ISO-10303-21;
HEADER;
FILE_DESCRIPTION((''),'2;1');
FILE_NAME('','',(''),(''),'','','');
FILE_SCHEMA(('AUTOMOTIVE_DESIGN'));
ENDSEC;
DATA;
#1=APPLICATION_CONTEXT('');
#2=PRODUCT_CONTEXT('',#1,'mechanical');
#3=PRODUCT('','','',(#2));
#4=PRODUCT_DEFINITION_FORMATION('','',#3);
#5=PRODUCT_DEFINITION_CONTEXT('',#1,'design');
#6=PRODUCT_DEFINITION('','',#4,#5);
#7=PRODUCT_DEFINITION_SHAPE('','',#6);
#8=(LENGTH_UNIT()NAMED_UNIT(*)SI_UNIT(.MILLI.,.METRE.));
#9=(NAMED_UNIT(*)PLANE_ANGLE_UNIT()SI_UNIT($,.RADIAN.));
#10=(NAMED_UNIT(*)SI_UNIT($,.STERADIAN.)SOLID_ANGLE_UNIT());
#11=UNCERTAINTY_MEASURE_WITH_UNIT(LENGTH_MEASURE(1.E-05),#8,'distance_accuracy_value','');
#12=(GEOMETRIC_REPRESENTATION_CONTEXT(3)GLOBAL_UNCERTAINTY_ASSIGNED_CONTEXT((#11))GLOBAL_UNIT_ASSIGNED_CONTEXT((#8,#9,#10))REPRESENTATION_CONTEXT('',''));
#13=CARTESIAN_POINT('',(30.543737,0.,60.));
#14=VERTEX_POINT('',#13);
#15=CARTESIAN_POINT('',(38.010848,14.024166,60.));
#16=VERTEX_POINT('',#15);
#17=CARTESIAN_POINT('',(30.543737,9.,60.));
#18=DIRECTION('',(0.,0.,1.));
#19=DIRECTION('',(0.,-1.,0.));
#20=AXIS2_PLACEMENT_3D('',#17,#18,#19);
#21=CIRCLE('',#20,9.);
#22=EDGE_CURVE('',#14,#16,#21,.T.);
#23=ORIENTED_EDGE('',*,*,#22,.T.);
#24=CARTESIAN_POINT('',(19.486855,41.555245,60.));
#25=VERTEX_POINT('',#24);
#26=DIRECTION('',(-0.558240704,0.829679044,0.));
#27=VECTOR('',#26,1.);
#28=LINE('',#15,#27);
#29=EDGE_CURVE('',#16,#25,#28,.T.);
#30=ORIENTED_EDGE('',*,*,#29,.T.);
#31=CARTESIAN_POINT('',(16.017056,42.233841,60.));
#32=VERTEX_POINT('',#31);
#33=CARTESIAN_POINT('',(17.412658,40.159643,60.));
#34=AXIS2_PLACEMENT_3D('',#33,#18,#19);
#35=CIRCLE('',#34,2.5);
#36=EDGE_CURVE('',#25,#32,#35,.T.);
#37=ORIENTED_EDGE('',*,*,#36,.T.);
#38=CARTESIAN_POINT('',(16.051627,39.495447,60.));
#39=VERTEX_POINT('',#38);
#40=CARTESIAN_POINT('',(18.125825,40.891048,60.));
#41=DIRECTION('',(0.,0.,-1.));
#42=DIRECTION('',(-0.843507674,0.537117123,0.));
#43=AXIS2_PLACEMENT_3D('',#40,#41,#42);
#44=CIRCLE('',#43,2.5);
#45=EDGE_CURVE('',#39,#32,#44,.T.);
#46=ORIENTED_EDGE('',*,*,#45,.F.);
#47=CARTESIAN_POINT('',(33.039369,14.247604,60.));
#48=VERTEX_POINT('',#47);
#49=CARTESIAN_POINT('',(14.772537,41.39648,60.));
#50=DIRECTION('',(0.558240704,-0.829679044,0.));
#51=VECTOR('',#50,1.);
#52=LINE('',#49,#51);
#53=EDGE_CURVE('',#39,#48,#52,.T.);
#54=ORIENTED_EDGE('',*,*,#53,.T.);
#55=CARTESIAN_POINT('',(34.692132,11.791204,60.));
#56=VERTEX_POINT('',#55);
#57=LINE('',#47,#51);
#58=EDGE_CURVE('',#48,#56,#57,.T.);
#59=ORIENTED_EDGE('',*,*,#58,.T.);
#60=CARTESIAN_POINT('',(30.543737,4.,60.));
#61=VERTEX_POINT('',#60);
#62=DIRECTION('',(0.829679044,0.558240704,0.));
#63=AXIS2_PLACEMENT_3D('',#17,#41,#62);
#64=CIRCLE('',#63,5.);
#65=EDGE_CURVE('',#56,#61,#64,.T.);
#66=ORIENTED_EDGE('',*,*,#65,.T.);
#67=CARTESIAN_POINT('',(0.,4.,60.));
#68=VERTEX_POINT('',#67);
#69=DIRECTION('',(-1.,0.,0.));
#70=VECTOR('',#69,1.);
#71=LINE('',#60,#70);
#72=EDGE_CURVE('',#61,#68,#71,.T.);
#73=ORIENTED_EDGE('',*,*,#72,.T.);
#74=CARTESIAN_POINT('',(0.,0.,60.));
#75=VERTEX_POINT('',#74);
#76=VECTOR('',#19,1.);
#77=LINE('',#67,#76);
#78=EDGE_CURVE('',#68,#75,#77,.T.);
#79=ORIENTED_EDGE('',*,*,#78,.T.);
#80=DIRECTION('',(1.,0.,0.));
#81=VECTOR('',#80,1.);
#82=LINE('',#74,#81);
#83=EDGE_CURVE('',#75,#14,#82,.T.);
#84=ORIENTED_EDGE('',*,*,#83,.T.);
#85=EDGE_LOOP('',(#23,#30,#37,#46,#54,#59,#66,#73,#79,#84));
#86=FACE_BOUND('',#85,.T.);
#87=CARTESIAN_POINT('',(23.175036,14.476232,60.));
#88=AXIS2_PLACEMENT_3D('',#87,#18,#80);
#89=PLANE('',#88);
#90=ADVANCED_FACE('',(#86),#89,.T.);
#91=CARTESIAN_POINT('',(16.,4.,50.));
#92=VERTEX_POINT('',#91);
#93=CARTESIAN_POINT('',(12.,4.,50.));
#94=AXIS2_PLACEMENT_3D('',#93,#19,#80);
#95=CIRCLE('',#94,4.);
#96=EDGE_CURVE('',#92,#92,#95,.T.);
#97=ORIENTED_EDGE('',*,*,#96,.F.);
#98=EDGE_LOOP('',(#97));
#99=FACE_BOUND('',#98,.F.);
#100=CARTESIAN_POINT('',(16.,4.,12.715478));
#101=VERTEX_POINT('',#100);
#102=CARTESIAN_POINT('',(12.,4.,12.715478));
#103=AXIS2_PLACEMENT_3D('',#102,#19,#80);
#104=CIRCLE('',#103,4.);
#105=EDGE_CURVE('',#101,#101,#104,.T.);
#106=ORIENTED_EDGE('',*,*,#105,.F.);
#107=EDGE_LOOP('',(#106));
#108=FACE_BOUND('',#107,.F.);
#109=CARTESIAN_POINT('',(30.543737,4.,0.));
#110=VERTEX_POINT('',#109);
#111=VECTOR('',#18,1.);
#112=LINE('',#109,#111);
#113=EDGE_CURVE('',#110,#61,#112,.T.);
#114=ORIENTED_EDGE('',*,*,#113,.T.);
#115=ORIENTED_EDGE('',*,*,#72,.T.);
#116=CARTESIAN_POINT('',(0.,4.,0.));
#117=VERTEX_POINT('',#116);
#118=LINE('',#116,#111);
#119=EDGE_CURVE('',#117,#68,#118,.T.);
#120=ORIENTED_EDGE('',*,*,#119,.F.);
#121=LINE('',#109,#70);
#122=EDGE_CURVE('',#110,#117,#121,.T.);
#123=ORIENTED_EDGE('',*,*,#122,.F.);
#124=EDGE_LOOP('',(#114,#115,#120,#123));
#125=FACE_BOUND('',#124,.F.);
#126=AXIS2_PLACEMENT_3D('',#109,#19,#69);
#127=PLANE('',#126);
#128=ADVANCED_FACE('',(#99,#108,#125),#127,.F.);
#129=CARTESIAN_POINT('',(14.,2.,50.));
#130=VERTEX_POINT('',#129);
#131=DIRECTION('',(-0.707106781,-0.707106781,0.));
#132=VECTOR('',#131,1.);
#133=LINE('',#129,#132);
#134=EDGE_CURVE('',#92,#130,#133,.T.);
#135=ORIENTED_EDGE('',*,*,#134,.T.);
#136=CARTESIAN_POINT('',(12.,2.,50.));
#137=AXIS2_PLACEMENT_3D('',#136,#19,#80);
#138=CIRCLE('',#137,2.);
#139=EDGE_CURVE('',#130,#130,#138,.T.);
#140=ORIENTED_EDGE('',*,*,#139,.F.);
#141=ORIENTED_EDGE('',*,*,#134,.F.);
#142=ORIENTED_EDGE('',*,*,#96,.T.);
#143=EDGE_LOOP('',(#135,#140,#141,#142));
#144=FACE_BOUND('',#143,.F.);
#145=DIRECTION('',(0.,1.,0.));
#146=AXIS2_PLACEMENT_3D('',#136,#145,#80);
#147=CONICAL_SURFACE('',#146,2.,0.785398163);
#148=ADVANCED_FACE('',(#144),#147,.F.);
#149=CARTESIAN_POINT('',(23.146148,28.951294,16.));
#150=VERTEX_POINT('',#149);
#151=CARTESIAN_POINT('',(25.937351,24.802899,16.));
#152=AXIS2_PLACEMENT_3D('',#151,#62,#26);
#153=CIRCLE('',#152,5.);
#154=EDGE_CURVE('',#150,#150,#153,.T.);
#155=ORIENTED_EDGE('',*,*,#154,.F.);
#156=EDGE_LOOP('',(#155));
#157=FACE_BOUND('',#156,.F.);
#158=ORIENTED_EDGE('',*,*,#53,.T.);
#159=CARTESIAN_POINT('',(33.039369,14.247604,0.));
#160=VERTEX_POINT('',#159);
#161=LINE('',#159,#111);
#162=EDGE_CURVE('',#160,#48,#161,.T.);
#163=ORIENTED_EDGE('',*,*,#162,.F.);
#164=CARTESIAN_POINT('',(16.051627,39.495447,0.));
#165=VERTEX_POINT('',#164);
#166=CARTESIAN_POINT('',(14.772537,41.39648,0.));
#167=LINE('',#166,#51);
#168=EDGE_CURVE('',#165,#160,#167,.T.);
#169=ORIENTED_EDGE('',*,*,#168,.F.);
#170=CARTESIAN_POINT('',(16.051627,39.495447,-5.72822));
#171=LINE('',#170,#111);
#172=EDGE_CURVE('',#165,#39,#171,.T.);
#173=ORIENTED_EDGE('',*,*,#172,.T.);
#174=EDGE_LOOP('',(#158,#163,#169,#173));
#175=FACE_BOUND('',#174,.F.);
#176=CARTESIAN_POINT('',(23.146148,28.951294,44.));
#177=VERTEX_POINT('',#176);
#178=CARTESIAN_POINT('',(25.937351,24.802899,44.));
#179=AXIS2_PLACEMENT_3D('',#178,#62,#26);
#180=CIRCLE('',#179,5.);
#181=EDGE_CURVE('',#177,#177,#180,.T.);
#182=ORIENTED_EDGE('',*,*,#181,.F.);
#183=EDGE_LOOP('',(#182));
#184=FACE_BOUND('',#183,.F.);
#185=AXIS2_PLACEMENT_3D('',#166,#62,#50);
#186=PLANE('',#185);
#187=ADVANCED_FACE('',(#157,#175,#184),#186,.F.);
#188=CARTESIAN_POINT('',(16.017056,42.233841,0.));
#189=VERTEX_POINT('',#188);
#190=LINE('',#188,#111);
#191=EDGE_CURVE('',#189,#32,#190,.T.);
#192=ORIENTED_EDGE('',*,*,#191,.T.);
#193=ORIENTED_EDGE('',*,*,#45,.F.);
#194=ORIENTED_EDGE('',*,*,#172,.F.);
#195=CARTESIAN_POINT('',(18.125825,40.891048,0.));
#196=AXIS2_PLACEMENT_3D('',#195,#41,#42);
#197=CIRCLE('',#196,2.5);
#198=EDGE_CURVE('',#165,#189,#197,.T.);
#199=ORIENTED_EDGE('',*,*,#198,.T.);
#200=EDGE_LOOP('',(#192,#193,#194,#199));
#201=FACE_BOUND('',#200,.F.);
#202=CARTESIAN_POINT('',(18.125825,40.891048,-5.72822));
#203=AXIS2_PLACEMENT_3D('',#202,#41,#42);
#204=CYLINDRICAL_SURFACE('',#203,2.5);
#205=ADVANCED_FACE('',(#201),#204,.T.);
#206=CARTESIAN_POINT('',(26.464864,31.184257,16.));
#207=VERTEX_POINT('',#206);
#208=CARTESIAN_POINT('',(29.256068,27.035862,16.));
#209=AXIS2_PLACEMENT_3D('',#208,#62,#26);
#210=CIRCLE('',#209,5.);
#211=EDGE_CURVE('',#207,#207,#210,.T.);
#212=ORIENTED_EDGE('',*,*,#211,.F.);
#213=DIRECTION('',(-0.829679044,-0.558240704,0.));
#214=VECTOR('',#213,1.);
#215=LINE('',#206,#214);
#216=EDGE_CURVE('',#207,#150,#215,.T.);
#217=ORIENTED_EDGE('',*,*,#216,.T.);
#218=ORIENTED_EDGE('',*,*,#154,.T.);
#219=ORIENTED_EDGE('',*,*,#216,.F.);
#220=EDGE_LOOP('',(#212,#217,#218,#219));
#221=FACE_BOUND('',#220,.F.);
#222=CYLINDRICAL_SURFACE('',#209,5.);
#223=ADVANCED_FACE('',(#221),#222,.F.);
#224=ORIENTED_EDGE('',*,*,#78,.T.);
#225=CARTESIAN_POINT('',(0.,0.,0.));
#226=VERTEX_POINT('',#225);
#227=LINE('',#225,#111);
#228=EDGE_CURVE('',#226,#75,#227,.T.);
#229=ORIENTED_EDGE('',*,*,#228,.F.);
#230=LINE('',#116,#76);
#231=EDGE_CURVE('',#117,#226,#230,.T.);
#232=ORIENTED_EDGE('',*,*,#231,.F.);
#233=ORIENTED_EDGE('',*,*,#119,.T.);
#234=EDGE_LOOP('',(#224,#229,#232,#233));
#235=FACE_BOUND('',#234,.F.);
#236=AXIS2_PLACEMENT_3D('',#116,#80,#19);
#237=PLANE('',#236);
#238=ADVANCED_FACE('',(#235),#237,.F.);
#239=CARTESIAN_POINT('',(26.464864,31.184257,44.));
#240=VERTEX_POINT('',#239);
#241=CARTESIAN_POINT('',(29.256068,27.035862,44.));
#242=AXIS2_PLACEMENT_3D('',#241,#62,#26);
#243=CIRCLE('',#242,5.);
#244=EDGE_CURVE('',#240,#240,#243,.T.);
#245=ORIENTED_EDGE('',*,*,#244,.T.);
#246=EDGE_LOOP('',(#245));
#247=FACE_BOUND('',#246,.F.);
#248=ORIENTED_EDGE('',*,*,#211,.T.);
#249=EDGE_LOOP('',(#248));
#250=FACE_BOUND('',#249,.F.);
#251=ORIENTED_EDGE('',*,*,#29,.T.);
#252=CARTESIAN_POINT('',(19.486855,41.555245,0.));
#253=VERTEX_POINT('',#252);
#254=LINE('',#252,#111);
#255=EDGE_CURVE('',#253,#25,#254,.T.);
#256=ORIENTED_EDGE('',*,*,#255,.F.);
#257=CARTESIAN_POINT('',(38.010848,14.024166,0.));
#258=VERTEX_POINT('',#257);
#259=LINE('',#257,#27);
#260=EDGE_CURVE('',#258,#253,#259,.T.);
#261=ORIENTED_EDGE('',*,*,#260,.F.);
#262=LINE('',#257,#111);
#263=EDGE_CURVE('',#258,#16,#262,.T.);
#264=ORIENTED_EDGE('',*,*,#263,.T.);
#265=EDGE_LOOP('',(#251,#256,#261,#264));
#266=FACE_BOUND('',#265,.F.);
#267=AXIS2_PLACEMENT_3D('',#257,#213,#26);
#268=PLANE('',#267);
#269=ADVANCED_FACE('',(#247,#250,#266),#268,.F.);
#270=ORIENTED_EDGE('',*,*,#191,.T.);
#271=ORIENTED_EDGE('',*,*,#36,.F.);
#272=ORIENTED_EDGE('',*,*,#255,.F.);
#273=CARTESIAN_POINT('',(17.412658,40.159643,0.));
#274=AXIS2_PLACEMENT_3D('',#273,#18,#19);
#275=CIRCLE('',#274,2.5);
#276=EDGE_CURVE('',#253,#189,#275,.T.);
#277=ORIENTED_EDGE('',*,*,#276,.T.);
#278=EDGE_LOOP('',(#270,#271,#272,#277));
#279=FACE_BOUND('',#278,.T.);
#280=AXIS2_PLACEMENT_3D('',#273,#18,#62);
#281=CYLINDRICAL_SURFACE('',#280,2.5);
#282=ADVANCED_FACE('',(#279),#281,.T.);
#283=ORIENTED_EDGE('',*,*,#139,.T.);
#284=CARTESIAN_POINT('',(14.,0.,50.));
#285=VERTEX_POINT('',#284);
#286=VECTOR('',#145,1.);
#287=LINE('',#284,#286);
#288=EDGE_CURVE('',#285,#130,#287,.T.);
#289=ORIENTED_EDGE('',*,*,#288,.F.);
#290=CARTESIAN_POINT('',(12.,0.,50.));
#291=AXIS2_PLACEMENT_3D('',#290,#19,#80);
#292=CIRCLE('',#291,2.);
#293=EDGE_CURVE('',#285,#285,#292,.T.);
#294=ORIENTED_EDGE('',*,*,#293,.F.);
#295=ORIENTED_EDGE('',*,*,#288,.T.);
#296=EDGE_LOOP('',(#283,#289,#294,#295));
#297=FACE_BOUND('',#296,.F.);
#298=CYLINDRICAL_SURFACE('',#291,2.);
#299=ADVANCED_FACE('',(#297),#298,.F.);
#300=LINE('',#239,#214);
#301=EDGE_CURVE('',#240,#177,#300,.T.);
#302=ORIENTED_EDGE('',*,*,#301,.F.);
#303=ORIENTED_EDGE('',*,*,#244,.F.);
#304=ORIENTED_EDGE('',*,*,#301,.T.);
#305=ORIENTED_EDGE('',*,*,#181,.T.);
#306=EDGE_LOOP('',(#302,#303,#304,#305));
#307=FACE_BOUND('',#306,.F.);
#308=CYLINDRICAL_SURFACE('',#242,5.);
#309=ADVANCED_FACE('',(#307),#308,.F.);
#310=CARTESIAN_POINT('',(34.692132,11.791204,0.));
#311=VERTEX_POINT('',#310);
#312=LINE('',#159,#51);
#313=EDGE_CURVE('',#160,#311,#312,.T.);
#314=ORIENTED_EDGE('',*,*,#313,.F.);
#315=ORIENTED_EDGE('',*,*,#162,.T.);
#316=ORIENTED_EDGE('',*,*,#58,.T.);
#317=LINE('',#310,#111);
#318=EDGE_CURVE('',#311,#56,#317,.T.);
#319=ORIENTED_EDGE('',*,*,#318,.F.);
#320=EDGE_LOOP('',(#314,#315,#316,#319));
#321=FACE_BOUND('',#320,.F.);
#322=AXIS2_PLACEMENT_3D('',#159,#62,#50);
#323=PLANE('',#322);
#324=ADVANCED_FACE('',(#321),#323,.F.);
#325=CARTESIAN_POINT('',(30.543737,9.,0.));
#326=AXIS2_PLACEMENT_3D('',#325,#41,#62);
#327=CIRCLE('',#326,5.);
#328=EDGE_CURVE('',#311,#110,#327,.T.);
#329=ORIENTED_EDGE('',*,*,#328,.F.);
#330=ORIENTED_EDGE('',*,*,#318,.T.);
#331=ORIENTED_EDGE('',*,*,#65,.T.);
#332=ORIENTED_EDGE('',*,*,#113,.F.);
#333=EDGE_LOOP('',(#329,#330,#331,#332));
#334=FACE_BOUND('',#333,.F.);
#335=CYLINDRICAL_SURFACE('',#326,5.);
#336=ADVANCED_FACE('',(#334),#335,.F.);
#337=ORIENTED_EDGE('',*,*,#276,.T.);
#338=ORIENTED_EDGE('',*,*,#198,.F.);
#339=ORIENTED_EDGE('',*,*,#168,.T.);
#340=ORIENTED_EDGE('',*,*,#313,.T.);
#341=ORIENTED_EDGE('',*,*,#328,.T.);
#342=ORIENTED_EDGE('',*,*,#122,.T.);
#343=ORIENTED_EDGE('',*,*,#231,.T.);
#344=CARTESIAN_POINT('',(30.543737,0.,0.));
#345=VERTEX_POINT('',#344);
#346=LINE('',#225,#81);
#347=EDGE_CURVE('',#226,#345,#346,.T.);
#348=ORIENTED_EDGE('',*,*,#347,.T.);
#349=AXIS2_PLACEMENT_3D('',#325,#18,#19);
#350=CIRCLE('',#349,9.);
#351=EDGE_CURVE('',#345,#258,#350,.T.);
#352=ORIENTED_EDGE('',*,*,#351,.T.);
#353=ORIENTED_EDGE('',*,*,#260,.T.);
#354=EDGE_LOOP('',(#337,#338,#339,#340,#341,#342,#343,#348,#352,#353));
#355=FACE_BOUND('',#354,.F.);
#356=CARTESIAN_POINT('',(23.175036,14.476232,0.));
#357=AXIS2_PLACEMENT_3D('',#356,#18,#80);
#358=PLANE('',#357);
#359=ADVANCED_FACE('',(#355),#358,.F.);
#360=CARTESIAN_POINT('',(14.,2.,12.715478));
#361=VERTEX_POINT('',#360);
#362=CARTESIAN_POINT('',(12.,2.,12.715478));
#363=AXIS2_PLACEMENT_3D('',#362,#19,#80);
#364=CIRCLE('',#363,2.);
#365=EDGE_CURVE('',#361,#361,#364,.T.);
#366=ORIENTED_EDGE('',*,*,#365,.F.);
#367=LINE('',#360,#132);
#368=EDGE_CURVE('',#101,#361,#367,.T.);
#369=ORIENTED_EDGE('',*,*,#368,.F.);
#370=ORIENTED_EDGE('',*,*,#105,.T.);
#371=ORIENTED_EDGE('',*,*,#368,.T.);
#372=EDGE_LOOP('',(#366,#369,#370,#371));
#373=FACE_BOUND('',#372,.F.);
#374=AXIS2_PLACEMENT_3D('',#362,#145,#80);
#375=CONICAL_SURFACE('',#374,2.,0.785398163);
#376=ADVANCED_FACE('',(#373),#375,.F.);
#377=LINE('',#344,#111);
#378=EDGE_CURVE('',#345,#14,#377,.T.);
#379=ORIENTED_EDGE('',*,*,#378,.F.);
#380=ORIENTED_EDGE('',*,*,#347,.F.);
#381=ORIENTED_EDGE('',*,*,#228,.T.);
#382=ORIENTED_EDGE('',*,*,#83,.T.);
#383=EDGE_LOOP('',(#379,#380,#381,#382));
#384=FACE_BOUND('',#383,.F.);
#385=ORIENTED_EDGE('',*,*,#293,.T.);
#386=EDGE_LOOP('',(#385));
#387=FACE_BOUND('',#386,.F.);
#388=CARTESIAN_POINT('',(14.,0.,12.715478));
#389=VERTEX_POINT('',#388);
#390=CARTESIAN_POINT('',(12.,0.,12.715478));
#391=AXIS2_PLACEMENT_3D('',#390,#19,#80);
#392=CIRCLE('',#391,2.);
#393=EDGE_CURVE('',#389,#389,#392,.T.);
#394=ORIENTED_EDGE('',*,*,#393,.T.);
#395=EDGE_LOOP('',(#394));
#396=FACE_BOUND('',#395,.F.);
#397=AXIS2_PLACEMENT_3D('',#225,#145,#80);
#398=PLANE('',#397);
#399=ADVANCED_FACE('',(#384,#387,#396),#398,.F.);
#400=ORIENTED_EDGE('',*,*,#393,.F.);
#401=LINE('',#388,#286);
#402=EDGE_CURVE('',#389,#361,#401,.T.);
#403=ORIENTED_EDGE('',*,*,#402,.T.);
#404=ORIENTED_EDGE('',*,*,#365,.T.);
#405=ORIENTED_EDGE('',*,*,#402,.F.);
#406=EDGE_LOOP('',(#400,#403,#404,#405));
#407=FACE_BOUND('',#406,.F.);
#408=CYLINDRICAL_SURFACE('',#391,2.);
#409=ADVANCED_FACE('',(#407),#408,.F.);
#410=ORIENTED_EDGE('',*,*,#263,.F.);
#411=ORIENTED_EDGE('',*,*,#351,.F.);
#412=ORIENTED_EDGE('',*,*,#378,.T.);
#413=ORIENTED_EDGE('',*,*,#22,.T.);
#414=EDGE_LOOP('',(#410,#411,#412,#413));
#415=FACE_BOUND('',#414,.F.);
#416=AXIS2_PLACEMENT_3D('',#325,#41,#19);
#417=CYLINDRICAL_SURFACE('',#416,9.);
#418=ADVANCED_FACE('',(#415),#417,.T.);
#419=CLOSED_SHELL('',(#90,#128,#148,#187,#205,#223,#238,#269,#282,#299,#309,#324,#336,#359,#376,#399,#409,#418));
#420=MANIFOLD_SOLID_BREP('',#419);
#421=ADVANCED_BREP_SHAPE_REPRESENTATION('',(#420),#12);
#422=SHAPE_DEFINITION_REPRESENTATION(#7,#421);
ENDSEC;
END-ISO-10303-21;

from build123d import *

# Parameters (mm, degrees)
F1_DEPTH    = 60
F2_R        = 5
F3_DEPTH    = 25
F4_R        = 2
F5_DEPTH    = 25
F6_SIZE     = 2
F7_SIZE     = 2
F8_R        = 2.5
F9_T1_DEPTH = 71.4564392374


# Not quite as in the source:
# - a fillet or chamfer that OpenCascade refuses, or shapes differently, is made with other operations: its cross-section is extruded or revolved along the edge and cut away or added


with BuildPart() as f1:
    # F0 (on Top) → F1 (new body)
    with BuildSketch(Plane.XY):
        with BuildLine():
            Line((0, 4), (0, 0))
            Line((0, 0), (30.5437369547, 0))
            ThreePointArc((30.5437369547, 0), (38.4878384458, 4.7701948627), (38.0108483544, 14.0241663334))
            Line((38.0108483544, 14.0241663334), (18.0912535296, 43.6294428556))
            Line((18.0912535296, 43.6294428556), (14.7725373519, 41.3964800408))
            Line((14.7725373519, 41.3964800408), (33.0393692072, 14.2476041216))
            Line((33.0393692072, 14.2476041216), (34.6921321767, 11.7912035185))
            ThreePointArc((34.6921321767, 11.7912035185), (34.957126672, 6.650108257), (30.5437369547, 4))
            Line((30.5437369547, 4), (0, 4))
        make_face()
    extrude(amount=F1_DEPTH)

    # F2 (on face) → F3 (cut)
    with BuildSketch(Plane(origin=(32.6608671723, 21.9755164324, 0), x_dir=(-0.5582407037, 0.8296790444, 0), z_dir=(0.8296790444, 0.5582407037, 0))):
        with Locations((6.0991603551, 44)):
            Circle(F2_R)
        with Locations((6.0991603551, 16)):
            Circle(F2_R)
    extrude(amount=-F3_DEPTH, mode=Mode.SUBTRACT)

    # F4 (on face) → F5 (cut)
    with BuildSketch(Plane.XZ):
        with Locations((12, 12.7154784277)):
            Circle(F4_R)
        with Locations((12, 50)):
            Circle(F4_R)
    extrude(amount=-F5_DEPTH, mode=Mode.SUBTRACT)

    # F6
    f6_edges = [f1.edges().sort_by_distance(p)[0] for p in [
        (10, 4, 12.715478),
    ]]
    chamfer(f6_edges, length=F6_SIZE)

    # F7
    f7_edges = [f1.edges().sort_by_distance(p)[0] for p in [
        (10, 4, 50),
    ]]
    chamfer(f7_edges, length=F7_SIZE)

    # F8
    f8_edges = [f1.edges().sort_by_distance(p)[0] for p in [
        (18.091254, 43.629443, 30),
    ]]
    fillet(f8_edges, radius=F8_R)

    # F9: fillet of radius 2.5 on 1 edges, made by hand

    # F9_s2 → F9_t1 (cut)
    with BuildSketch(Plane.XY.offset(-5.7282196187)):
        with BuildLine():
            ThreePointArc((16.0170559185, 42.2338410964), (15.6260243102, 40.8594889036), (16.0516274923, 39.495446529))
            Line((16.0516274923, 39.495446529), (14.7725373519, 41.3964800408))
            Line((14.7725373519, 41.3964800408), (16.0170559185, 42.2338410964))
        make_face()
    extrude(amount=F9_T1_DEPTH, mode=Mode.SUBTRACT)


solid = f1.part
